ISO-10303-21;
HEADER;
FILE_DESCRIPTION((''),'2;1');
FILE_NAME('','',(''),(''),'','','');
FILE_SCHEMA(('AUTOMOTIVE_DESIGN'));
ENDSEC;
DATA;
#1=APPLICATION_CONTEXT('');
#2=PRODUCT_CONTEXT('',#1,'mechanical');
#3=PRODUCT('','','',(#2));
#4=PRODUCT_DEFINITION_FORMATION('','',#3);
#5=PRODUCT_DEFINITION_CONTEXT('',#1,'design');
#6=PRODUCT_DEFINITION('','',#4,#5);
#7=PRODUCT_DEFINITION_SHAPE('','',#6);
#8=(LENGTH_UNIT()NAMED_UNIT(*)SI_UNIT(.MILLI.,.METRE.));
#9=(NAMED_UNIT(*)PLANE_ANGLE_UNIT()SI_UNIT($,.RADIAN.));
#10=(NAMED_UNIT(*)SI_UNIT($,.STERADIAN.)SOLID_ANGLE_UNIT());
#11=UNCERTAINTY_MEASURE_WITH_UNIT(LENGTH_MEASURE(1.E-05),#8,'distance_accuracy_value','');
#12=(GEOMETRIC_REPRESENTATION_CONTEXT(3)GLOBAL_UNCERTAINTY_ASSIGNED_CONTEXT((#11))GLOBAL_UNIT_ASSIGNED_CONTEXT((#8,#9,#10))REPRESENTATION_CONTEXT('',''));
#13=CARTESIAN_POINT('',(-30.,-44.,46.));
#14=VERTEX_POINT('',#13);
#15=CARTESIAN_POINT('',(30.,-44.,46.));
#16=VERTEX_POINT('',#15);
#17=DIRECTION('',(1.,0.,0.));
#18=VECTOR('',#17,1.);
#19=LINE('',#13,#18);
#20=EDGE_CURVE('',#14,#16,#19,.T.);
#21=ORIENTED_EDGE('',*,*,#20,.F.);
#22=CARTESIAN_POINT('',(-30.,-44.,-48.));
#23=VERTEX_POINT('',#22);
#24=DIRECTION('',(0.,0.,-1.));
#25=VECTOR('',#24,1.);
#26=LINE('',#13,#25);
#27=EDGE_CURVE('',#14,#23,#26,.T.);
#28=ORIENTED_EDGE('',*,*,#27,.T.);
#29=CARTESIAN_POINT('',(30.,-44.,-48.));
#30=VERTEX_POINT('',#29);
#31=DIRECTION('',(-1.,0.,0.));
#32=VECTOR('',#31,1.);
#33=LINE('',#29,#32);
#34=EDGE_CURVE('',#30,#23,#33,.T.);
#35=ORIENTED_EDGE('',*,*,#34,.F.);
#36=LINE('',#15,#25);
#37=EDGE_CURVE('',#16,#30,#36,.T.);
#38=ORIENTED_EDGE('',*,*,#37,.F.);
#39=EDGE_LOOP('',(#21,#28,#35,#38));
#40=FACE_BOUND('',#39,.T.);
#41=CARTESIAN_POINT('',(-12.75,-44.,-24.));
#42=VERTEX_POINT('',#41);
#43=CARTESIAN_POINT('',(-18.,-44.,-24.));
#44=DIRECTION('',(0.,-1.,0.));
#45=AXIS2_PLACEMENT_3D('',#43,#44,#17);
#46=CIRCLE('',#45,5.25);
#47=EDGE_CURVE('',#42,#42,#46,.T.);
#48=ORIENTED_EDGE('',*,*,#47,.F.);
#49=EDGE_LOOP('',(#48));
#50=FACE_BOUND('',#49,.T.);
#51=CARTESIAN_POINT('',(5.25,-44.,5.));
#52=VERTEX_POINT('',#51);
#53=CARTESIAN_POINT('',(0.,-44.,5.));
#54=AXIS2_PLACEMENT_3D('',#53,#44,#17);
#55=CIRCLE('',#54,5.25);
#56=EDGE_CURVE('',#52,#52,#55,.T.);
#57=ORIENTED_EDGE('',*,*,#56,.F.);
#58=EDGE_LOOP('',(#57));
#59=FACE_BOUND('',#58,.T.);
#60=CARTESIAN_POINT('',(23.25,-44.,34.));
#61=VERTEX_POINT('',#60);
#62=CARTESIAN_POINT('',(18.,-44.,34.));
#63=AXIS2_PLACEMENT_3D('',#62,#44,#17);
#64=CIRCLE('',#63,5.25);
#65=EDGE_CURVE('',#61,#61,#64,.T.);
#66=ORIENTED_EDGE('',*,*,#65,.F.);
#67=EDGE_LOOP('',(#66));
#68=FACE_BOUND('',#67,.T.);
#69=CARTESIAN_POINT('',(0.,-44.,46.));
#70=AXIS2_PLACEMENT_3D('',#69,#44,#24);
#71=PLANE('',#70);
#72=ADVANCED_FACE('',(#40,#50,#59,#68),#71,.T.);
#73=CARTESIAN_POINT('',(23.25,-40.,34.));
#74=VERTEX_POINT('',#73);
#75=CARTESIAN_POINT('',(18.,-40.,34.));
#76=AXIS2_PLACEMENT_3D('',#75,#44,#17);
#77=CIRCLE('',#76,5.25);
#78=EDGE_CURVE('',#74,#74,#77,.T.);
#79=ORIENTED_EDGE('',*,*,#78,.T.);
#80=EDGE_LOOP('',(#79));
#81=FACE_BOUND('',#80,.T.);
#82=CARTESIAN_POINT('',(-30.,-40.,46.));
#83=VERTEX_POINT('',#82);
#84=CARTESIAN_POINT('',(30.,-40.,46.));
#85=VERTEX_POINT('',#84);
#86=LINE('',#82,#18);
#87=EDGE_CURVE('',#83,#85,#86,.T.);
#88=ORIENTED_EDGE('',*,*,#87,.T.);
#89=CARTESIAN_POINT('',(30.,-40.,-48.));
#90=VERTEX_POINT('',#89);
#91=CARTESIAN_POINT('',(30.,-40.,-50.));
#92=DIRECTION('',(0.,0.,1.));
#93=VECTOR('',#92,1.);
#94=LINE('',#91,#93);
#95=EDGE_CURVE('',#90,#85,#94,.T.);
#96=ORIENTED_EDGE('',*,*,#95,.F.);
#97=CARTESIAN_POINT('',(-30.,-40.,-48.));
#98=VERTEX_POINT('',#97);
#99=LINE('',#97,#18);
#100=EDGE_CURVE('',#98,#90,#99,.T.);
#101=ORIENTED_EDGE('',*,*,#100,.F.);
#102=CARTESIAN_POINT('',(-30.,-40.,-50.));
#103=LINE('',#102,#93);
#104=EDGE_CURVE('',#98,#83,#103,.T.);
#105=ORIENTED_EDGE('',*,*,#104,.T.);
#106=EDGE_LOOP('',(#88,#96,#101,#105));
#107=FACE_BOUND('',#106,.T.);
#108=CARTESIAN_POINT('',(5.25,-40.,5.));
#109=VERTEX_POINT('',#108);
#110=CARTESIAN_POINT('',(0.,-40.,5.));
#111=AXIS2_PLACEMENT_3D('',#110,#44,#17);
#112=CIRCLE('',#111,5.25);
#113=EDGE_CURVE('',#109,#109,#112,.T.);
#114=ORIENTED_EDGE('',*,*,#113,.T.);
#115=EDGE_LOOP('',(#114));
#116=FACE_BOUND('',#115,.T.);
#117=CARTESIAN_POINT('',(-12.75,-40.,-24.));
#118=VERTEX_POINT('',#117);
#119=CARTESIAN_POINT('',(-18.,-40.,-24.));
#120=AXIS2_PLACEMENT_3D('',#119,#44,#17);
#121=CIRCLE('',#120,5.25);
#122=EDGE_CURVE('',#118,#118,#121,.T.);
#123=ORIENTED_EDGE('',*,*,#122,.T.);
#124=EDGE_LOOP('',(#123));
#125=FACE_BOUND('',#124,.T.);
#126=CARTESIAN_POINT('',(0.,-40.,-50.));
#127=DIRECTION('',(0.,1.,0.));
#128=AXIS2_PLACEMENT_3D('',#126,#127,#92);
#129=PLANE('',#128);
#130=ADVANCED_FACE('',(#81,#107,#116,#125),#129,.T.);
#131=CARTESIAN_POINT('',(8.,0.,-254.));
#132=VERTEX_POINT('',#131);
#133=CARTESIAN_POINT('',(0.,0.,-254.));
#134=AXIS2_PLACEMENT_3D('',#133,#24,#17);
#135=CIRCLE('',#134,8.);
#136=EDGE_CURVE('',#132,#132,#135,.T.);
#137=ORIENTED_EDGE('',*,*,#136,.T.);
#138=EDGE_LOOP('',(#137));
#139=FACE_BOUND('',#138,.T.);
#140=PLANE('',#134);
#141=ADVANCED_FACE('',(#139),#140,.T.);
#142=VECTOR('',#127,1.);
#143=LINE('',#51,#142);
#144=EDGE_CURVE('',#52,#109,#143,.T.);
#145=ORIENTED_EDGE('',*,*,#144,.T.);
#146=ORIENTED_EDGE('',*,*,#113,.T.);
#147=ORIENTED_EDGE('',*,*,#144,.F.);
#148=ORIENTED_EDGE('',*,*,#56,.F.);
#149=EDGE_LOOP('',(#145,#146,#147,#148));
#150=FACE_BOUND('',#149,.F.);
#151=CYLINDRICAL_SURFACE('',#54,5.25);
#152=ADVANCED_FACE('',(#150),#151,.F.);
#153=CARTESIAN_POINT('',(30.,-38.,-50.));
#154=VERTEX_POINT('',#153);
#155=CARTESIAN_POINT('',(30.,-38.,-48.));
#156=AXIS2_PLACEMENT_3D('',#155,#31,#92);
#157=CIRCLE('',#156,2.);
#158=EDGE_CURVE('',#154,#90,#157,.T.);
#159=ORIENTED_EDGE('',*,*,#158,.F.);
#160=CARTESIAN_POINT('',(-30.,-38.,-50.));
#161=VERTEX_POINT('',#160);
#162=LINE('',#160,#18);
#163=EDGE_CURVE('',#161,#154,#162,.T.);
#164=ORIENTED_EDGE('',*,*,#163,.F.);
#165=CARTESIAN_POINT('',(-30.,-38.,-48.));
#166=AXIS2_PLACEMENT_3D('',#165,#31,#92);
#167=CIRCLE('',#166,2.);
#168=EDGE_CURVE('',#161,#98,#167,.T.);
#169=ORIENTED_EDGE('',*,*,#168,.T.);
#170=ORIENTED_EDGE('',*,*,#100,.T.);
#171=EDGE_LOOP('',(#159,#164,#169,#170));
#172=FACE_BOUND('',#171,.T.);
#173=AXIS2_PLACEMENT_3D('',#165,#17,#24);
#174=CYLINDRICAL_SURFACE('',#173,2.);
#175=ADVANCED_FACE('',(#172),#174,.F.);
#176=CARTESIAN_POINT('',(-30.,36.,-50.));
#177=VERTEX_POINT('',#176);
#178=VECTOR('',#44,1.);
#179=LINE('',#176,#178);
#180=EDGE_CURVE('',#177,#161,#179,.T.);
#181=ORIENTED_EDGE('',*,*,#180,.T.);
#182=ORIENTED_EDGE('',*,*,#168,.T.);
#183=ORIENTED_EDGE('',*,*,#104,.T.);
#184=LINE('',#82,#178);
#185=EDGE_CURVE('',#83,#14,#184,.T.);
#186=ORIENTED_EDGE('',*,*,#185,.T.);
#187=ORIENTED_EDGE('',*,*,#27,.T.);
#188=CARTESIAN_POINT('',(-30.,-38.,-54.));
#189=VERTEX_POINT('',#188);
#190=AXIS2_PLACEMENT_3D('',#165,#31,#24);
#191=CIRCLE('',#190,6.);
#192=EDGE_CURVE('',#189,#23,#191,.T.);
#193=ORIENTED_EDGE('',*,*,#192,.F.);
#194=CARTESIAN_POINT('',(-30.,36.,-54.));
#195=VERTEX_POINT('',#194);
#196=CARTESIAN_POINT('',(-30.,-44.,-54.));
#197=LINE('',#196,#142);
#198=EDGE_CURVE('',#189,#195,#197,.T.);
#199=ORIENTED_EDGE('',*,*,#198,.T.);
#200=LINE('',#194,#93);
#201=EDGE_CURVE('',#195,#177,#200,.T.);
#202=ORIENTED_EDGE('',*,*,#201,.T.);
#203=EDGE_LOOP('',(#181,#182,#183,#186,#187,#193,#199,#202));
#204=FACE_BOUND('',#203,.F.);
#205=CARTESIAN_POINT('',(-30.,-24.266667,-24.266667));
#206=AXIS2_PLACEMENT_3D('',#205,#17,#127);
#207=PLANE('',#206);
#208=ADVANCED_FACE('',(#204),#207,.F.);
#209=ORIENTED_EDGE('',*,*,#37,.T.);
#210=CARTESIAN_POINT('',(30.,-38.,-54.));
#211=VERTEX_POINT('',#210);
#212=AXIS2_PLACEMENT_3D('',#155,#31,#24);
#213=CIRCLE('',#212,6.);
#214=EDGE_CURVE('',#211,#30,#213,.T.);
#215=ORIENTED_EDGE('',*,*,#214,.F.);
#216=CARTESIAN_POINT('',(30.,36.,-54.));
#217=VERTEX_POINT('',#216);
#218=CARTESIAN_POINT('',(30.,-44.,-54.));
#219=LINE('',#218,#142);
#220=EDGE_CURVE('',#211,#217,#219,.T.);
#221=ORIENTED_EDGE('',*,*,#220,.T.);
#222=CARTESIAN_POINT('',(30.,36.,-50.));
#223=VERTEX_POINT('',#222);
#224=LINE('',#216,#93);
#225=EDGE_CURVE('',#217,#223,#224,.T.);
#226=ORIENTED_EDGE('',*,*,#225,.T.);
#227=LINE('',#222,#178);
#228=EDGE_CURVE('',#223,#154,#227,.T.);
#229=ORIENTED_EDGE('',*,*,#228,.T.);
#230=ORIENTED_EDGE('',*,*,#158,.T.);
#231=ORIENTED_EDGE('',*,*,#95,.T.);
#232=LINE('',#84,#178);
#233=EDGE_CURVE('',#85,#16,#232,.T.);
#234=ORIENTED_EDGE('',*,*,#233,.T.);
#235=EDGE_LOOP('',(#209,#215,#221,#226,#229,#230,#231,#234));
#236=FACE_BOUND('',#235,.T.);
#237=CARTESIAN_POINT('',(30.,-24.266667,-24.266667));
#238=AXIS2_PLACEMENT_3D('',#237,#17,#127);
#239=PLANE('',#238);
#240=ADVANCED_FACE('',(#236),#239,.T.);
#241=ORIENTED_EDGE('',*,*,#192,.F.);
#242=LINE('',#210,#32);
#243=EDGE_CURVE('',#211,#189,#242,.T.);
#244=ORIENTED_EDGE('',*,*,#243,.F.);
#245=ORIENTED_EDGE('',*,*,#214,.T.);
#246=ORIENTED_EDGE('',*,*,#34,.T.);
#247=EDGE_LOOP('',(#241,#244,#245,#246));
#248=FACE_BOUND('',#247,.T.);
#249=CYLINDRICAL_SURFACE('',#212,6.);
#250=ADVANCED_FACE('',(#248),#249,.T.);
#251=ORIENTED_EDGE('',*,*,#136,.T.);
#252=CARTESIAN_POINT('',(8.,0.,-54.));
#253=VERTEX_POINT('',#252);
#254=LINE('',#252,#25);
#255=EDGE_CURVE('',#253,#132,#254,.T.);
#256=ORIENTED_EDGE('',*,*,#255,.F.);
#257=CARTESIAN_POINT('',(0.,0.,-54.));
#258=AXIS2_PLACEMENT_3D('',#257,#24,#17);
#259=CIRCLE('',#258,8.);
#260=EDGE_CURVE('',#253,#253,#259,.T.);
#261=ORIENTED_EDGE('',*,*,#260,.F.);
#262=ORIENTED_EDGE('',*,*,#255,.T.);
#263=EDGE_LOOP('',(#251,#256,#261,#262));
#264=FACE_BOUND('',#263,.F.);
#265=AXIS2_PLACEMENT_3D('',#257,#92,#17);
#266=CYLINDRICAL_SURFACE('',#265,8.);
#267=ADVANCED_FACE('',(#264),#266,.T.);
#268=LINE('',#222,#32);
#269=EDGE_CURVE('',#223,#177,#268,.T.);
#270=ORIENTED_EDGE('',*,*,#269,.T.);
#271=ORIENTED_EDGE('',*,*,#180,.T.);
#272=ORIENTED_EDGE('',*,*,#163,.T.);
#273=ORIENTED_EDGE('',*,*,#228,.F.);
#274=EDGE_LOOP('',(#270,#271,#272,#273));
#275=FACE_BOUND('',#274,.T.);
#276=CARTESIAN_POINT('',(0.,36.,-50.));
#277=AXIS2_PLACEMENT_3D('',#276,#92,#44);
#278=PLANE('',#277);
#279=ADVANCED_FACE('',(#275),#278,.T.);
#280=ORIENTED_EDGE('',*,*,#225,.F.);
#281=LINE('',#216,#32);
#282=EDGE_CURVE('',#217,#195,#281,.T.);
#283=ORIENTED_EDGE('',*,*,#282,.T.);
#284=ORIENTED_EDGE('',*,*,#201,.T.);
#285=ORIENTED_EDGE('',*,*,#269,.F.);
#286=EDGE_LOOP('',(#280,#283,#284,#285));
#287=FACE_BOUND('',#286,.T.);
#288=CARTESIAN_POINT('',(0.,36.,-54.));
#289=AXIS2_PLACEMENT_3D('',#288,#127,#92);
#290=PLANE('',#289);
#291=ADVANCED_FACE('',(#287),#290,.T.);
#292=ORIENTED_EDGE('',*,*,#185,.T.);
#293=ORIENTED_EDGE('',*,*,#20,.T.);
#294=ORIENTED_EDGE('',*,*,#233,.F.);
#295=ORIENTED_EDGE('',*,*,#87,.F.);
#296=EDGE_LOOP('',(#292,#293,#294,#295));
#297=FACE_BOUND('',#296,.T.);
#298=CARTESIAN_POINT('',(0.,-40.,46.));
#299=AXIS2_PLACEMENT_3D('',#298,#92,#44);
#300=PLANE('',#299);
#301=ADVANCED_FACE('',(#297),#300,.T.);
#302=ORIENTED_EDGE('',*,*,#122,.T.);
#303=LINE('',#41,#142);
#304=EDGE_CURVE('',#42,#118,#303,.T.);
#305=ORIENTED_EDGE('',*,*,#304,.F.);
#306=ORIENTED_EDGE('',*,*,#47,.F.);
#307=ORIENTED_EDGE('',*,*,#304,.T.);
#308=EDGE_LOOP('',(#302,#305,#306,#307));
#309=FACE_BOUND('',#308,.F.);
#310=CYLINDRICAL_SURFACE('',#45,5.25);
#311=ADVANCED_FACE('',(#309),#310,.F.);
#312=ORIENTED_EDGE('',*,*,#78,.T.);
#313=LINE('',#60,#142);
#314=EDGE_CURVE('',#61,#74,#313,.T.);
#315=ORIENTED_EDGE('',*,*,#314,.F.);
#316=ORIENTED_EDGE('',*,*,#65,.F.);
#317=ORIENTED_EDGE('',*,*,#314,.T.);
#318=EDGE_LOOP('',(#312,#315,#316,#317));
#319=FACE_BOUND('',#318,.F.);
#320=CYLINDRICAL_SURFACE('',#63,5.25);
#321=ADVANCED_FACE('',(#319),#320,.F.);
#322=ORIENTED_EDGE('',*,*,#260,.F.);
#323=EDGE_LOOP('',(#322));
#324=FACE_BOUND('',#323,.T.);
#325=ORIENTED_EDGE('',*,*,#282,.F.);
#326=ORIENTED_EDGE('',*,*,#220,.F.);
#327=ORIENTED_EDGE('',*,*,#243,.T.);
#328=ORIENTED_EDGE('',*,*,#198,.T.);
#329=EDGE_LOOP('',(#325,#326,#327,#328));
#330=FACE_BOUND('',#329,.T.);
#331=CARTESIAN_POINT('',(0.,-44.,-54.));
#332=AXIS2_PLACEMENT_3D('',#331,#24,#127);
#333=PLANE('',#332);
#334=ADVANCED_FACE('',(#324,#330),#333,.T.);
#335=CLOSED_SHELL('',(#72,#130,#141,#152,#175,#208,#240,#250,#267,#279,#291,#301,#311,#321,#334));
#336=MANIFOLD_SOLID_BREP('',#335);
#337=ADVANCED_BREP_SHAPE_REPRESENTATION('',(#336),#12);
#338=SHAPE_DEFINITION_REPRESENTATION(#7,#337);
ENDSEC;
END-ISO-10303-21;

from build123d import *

# Parameters (mm, degrees)
F1_DEPTH = 30
F2_R     = 8
F3_DEPTH = 200
F5_R     = 2
F6_R     = 6
F4_R     = 5.25
F7_DEPTH = 25


# Not quite as in the source:
# - a feature names something its author has since deleted; it is built from what else it names


with BuildPart() as f1:
    # F0 (on Right) → F1 (new body, symmetric)
    with BuildSketch(Plane.YZ):
        Polygon((36, -50), (-40, -50), (-40, 46), (-44, 46), (-44, -54), (36, -54), align=None)
    extrude(amount=F1_DEPTH, both=True)

    # F2 (on face) → F3 (join)
    with BuildSketch(Plane(origin=(0, 0, -54), x_dir=(1, 0, 0), z_dir=(0, 0, -1))):
        Circle(F2_R)
    extrude(amount=F3_DEPTH)

    # F5
    f5_edges = [f1.edges().sort_by_distance(p)[0] for p in [
        (0, -40, -50),
    ]]
    fillet(f5_edges, radius=F5_R)

    # F6
    f6_edges = [f1.edges().sort_by_distance(p)[0] for p in [
        (0, -44, -54),
    ]]
    fillet(f6_edges, radius=F6_R)

    # F4 (on face) → F7 (cut)
    with BuildSketch(Plane.XZ.offset(44)):
        with Locations((18, 34)):
            Circle(F4_R)
        with Locations((0, 5)):
            Circle(F4_R)
        with Locations((-18, -24)):
            Circle(F4_R)
    extrude(amount=-F7_DEPTH, mode=Mode.SUBTRACT)


solid = f1.part
